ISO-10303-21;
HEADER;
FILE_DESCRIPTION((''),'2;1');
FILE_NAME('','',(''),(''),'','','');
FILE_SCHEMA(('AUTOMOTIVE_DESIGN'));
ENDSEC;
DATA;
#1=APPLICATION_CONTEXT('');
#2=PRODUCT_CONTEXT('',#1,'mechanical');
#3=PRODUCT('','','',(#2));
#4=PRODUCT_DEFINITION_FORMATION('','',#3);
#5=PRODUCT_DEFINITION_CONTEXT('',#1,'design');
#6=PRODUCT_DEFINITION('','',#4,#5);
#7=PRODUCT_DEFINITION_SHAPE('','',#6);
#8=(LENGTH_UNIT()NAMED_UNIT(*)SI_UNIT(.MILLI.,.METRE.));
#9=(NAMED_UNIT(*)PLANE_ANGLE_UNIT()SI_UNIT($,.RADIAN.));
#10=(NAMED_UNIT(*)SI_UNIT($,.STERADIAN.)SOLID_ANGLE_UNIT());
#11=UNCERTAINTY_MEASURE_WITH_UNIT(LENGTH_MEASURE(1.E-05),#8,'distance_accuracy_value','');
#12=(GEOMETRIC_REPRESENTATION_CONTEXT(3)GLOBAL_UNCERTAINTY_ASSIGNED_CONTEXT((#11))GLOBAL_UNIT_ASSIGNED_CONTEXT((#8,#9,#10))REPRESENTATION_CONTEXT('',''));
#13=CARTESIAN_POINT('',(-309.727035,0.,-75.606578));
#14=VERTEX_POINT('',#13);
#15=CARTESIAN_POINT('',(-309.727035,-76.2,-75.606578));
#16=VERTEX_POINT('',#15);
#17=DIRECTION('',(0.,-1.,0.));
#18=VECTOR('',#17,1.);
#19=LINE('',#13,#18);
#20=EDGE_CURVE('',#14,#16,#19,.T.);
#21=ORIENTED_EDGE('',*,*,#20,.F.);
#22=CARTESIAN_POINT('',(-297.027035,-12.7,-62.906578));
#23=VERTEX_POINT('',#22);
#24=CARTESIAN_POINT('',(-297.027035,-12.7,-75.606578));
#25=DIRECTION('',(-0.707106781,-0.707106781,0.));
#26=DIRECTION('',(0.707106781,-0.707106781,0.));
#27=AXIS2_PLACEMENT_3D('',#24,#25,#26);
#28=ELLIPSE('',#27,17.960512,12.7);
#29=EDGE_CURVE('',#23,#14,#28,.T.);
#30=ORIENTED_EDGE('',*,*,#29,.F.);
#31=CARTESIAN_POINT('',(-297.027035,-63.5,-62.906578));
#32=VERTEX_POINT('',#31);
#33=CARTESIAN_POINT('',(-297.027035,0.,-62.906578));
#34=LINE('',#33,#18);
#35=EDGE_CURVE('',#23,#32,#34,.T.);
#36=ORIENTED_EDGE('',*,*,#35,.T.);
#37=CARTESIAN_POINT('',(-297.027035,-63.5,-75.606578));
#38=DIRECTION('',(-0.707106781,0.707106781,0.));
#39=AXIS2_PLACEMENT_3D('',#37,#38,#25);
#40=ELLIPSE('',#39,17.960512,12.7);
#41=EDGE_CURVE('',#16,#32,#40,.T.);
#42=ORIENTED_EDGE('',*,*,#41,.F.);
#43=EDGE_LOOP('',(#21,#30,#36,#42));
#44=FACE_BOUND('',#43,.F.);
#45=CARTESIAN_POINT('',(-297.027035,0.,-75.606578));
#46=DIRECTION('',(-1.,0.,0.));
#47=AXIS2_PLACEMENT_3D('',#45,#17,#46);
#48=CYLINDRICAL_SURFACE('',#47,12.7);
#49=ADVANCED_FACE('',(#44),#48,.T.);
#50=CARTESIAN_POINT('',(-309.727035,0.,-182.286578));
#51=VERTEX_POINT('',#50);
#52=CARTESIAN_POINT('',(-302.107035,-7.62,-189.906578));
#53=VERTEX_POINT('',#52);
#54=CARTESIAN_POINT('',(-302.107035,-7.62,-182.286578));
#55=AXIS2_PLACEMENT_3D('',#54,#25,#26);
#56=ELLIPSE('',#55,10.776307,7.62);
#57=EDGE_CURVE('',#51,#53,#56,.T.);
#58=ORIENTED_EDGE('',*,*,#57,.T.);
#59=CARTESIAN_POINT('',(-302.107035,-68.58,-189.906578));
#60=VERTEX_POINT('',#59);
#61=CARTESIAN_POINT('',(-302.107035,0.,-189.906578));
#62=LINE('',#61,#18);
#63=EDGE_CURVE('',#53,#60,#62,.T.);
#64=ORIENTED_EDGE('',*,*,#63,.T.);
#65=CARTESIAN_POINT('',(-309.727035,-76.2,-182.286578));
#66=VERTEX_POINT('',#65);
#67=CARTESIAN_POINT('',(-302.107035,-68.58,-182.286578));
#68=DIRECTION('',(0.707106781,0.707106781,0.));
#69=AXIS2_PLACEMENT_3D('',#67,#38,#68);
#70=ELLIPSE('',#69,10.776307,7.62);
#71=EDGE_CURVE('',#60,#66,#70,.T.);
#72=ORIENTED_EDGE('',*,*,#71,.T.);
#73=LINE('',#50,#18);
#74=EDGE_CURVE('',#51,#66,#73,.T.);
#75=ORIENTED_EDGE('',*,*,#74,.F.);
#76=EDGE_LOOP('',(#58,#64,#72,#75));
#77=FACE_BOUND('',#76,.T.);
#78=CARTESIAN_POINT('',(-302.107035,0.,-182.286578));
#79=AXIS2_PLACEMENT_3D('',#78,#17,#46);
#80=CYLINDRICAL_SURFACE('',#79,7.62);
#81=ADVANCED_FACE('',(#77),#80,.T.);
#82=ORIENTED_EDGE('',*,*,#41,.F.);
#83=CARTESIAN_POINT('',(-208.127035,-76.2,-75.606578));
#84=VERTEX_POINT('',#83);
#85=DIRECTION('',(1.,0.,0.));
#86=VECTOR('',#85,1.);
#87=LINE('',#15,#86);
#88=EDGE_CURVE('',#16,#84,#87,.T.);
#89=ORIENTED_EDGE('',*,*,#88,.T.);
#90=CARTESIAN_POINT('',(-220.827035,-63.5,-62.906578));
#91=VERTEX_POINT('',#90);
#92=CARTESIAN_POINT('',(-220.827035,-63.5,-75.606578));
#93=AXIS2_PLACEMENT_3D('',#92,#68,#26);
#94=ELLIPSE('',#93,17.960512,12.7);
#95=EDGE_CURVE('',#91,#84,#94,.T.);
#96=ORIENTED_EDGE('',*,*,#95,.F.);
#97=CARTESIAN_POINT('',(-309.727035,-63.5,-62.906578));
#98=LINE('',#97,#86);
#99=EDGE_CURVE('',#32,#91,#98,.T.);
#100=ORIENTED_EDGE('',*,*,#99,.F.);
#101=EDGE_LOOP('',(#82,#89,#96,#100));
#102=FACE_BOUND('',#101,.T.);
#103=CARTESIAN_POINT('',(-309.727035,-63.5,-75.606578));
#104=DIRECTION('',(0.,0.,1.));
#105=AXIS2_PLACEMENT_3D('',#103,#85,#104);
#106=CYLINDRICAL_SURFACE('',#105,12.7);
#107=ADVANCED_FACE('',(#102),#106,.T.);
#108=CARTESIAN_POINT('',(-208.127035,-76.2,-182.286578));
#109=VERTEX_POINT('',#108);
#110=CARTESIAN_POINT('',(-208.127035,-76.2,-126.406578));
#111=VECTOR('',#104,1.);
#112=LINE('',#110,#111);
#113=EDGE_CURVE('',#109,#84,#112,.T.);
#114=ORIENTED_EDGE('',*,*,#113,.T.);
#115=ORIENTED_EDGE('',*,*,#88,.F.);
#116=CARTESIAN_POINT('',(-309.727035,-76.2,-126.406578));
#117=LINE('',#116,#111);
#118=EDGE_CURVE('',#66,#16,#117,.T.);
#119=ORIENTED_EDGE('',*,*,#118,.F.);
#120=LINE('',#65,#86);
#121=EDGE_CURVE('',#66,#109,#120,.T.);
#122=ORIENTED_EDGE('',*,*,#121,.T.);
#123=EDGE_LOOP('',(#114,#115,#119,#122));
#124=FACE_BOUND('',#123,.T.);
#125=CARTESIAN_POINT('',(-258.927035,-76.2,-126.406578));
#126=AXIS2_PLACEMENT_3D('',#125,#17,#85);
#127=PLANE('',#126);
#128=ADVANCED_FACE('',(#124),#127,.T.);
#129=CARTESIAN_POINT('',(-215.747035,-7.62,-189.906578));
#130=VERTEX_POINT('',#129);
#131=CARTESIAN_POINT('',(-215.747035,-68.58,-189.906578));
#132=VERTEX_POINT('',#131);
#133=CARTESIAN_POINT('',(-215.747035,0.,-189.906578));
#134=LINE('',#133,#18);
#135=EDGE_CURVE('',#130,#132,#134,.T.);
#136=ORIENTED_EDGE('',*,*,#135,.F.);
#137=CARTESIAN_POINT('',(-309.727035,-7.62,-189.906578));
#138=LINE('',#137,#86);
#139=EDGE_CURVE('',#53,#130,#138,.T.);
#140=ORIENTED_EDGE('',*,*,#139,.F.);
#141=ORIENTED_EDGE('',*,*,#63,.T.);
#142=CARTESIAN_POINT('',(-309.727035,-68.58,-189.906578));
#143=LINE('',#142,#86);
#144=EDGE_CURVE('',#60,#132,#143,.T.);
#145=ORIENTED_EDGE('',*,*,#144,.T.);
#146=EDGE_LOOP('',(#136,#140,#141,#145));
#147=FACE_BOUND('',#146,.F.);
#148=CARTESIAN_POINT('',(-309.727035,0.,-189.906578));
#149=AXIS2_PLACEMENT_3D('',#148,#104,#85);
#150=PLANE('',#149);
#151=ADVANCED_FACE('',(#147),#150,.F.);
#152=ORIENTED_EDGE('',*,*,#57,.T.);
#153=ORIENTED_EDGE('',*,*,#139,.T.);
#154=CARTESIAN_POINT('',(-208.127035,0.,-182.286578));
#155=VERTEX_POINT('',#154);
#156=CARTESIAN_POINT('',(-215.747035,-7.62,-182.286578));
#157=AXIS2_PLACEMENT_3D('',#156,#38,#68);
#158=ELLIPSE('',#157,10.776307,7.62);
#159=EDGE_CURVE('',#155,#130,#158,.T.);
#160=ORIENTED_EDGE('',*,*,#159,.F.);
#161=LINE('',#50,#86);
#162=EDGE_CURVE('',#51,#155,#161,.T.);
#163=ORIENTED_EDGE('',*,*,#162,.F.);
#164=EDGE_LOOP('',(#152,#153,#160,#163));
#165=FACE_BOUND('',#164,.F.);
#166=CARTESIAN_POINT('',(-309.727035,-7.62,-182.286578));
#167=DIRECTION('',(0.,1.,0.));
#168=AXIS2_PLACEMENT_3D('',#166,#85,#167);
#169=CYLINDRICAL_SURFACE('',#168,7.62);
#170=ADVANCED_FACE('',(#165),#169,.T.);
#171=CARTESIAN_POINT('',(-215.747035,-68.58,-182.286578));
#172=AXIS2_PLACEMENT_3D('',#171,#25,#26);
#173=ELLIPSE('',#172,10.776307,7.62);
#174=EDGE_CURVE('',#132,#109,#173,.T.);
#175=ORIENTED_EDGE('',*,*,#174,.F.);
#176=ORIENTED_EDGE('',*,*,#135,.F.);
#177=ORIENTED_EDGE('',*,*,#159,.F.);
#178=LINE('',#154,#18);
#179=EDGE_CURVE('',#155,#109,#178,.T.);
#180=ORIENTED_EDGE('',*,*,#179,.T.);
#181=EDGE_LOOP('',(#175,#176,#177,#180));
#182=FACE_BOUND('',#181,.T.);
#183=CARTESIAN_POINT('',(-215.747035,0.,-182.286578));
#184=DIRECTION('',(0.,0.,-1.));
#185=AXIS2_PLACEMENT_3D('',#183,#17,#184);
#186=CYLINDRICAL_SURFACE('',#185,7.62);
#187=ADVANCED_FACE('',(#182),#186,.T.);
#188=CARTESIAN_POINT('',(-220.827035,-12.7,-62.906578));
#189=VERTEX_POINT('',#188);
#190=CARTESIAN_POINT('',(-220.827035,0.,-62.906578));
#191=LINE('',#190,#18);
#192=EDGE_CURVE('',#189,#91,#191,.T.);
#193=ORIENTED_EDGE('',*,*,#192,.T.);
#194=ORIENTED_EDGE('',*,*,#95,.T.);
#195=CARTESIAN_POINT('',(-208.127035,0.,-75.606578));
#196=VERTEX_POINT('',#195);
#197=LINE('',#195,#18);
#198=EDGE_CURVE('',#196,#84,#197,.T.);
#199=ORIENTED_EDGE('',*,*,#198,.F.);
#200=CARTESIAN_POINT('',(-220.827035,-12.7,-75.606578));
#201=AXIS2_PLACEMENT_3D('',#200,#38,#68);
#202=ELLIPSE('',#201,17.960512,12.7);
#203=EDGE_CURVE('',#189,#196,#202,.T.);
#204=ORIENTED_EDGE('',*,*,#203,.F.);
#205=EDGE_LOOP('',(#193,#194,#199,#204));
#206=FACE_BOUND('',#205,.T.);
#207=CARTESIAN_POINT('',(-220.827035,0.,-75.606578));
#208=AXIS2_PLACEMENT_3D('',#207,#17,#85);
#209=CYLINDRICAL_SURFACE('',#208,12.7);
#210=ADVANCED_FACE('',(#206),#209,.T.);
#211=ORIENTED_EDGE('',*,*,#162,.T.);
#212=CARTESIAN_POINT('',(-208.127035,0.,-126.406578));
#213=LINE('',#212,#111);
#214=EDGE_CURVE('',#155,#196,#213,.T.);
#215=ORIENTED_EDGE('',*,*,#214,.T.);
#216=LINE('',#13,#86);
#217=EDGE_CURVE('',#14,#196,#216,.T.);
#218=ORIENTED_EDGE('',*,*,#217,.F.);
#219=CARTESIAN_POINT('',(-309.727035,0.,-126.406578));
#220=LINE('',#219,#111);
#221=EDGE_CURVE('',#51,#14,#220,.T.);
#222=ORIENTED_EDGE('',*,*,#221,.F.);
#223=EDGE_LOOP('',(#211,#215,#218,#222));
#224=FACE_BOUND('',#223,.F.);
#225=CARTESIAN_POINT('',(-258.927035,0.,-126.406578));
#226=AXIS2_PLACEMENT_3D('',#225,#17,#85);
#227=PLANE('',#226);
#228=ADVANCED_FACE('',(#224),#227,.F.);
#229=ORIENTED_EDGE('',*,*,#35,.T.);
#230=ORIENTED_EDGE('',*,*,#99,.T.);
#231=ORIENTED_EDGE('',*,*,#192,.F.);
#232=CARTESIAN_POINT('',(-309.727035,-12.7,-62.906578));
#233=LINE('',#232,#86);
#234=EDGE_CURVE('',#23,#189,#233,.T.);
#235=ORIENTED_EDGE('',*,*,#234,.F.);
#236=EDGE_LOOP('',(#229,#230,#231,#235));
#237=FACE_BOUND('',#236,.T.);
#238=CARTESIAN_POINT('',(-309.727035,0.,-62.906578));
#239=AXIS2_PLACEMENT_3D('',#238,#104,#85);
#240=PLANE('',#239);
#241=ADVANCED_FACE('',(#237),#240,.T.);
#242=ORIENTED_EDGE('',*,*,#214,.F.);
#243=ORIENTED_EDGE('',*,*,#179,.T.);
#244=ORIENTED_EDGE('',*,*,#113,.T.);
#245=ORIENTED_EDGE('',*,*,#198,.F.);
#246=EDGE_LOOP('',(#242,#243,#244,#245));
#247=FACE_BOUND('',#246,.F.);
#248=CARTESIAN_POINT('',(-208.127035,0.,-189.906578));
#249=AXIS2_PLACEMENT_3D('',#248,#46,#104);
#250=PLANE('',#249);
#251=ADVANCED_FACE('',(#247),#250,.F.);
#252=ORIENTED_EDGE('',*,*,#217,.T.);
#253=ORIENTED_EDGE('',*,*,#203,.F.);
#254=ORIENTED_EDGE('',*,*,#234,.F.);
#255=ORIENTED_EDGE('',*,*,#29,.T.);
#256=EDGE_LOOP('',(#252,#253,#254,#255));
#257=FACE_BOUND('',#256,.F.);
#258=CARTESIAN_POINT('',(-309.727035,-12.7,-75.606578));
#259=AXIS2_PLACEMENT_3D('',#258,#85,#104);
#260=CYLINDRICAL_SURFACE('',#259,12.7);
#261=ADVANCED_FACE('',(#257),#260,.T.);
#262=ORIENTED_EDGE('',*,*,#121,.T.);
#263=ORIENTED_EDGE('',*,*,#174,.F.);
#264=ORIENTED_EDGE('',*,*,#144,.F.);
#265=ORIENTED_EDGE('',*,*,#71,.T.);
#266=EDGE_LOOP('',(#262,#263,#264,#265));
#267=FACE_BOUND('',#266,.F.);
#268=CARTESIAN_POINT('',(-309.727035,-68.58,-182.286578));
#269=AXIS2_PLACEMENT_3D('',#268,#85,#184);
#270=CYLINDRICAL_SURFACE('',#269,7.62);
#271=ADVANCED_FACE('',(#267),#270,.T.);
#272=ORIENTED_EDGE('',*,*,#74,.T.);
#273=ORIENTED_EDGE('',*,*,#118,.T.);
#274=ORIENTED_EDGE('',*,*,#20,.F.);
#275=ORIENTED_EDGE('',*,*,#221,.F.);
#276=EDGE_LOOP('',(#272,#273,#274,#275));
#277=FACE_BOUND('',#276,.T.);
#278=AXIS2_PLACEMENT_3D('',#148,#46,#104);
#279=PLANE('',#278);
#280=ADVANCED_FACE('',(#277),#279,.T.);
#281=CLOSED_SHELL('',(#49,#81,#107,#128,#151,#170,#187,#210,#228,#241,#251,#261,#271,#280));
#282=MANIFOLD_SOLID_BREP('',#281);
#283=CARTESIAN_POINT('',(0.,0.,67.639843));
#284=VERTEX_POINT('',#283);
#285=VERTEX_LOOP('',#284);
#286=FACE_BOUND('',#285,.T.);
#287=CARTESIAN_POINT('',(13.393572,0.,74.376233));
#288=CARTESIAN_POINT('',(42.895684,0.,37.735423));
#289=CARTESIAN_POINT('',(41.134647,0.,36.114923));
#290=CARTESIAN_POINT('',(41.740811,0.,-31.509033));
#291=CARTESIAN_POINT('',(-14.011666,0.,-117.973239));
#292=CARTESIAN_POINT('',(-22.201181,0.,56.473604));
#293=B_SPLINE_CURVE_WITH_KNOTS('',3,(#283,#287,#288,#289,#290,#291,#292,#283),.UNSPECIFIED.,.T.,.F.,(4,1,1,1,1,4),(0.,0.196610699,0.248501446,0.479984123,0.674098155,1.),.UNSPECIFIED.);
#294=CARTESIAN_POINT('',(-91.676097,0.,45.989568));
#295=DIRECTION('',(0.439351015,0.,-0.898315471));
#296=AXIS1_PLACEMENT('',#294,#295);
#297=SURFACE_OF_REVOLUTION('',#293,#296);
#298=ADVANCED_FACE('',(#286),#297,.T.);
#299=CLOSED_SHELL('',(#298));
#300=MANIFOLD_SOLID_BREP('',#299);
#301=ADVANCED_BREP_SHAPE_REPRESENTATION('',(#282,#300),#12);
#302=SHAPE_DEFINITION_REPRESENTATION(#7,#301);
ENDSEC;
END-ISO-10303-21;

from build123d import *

# Parameters (mm, degrees)
F0_W     = 101.6
F0_H     = 127
F2_DEPTH = 76.2
F3_R     = 12.7
F4_R     = 7.62


# Not quite as in the source:
# - a feature names something its author has since deleted; it is built from what else it names


with BuildPart() as f1:
    # F0 (on Front) → F1 (revolve)
    with BuildSketch(Plane.XZ):
        with BuildLine():
            add(Edge.make_bspline(
                [(0, 67.6398426294), (13.3935718053, 74.3762328832), (42.8956839394, 37.7354229944), (41.1346471608, 36.1149227712), (41.7408109301, -31.509032611), (-14.011665596, -117.9732392774), (-22.2011812589, 56.4736038375), (0, 67.6398426294)],
                knots=[0, 0, 0, 0, 0.1966106986, 0.2485014456, 0.4799841226, 0.6740981553, 1, 1, 1, 1], degree=3))
        make_face()
    revolve(axis=Axis((-91.6760973632, 0, 45.9895678796), (0.4393510153, 0, -0.898315471)))


with BuildPart() as f2:
    # F0 (on Front) → F2 (new body)
    with BuildSketch(Plane.XZ):
        with Locations((-258.9270345211, -126.4065781832)):
            Rectangle(F0_W, F0_H)
    extrude(amount=F2_DEPTH)

    # F3
    f3_edges = [f2.edges().sort_by_distance(p)[0] for p in [
        (-258.927035, 0, -62.906578),
        (-309.727035, -38.1, -62.906578),
        (-258.927035, -76.2, -62.906578),
        (-208.127035, -38.1, -62.906578),
    ]]
    fillet(f3_edges, radius=F3_R)

    # F4
    f4_edges = [f2.edges().sort_by_distance(p)[0] for p in [
        (-258.927035, -76.2, -189.906578),
        (-309.727035, -38.1, -189.906578),
        (-258.927035, 0, -189.906578),
        (-208.127035, -38.1, -189.906578),
    ]]
    fillet(f4_edges, radius=F4_R)


solid = Compound([f1.part, f2.part])
